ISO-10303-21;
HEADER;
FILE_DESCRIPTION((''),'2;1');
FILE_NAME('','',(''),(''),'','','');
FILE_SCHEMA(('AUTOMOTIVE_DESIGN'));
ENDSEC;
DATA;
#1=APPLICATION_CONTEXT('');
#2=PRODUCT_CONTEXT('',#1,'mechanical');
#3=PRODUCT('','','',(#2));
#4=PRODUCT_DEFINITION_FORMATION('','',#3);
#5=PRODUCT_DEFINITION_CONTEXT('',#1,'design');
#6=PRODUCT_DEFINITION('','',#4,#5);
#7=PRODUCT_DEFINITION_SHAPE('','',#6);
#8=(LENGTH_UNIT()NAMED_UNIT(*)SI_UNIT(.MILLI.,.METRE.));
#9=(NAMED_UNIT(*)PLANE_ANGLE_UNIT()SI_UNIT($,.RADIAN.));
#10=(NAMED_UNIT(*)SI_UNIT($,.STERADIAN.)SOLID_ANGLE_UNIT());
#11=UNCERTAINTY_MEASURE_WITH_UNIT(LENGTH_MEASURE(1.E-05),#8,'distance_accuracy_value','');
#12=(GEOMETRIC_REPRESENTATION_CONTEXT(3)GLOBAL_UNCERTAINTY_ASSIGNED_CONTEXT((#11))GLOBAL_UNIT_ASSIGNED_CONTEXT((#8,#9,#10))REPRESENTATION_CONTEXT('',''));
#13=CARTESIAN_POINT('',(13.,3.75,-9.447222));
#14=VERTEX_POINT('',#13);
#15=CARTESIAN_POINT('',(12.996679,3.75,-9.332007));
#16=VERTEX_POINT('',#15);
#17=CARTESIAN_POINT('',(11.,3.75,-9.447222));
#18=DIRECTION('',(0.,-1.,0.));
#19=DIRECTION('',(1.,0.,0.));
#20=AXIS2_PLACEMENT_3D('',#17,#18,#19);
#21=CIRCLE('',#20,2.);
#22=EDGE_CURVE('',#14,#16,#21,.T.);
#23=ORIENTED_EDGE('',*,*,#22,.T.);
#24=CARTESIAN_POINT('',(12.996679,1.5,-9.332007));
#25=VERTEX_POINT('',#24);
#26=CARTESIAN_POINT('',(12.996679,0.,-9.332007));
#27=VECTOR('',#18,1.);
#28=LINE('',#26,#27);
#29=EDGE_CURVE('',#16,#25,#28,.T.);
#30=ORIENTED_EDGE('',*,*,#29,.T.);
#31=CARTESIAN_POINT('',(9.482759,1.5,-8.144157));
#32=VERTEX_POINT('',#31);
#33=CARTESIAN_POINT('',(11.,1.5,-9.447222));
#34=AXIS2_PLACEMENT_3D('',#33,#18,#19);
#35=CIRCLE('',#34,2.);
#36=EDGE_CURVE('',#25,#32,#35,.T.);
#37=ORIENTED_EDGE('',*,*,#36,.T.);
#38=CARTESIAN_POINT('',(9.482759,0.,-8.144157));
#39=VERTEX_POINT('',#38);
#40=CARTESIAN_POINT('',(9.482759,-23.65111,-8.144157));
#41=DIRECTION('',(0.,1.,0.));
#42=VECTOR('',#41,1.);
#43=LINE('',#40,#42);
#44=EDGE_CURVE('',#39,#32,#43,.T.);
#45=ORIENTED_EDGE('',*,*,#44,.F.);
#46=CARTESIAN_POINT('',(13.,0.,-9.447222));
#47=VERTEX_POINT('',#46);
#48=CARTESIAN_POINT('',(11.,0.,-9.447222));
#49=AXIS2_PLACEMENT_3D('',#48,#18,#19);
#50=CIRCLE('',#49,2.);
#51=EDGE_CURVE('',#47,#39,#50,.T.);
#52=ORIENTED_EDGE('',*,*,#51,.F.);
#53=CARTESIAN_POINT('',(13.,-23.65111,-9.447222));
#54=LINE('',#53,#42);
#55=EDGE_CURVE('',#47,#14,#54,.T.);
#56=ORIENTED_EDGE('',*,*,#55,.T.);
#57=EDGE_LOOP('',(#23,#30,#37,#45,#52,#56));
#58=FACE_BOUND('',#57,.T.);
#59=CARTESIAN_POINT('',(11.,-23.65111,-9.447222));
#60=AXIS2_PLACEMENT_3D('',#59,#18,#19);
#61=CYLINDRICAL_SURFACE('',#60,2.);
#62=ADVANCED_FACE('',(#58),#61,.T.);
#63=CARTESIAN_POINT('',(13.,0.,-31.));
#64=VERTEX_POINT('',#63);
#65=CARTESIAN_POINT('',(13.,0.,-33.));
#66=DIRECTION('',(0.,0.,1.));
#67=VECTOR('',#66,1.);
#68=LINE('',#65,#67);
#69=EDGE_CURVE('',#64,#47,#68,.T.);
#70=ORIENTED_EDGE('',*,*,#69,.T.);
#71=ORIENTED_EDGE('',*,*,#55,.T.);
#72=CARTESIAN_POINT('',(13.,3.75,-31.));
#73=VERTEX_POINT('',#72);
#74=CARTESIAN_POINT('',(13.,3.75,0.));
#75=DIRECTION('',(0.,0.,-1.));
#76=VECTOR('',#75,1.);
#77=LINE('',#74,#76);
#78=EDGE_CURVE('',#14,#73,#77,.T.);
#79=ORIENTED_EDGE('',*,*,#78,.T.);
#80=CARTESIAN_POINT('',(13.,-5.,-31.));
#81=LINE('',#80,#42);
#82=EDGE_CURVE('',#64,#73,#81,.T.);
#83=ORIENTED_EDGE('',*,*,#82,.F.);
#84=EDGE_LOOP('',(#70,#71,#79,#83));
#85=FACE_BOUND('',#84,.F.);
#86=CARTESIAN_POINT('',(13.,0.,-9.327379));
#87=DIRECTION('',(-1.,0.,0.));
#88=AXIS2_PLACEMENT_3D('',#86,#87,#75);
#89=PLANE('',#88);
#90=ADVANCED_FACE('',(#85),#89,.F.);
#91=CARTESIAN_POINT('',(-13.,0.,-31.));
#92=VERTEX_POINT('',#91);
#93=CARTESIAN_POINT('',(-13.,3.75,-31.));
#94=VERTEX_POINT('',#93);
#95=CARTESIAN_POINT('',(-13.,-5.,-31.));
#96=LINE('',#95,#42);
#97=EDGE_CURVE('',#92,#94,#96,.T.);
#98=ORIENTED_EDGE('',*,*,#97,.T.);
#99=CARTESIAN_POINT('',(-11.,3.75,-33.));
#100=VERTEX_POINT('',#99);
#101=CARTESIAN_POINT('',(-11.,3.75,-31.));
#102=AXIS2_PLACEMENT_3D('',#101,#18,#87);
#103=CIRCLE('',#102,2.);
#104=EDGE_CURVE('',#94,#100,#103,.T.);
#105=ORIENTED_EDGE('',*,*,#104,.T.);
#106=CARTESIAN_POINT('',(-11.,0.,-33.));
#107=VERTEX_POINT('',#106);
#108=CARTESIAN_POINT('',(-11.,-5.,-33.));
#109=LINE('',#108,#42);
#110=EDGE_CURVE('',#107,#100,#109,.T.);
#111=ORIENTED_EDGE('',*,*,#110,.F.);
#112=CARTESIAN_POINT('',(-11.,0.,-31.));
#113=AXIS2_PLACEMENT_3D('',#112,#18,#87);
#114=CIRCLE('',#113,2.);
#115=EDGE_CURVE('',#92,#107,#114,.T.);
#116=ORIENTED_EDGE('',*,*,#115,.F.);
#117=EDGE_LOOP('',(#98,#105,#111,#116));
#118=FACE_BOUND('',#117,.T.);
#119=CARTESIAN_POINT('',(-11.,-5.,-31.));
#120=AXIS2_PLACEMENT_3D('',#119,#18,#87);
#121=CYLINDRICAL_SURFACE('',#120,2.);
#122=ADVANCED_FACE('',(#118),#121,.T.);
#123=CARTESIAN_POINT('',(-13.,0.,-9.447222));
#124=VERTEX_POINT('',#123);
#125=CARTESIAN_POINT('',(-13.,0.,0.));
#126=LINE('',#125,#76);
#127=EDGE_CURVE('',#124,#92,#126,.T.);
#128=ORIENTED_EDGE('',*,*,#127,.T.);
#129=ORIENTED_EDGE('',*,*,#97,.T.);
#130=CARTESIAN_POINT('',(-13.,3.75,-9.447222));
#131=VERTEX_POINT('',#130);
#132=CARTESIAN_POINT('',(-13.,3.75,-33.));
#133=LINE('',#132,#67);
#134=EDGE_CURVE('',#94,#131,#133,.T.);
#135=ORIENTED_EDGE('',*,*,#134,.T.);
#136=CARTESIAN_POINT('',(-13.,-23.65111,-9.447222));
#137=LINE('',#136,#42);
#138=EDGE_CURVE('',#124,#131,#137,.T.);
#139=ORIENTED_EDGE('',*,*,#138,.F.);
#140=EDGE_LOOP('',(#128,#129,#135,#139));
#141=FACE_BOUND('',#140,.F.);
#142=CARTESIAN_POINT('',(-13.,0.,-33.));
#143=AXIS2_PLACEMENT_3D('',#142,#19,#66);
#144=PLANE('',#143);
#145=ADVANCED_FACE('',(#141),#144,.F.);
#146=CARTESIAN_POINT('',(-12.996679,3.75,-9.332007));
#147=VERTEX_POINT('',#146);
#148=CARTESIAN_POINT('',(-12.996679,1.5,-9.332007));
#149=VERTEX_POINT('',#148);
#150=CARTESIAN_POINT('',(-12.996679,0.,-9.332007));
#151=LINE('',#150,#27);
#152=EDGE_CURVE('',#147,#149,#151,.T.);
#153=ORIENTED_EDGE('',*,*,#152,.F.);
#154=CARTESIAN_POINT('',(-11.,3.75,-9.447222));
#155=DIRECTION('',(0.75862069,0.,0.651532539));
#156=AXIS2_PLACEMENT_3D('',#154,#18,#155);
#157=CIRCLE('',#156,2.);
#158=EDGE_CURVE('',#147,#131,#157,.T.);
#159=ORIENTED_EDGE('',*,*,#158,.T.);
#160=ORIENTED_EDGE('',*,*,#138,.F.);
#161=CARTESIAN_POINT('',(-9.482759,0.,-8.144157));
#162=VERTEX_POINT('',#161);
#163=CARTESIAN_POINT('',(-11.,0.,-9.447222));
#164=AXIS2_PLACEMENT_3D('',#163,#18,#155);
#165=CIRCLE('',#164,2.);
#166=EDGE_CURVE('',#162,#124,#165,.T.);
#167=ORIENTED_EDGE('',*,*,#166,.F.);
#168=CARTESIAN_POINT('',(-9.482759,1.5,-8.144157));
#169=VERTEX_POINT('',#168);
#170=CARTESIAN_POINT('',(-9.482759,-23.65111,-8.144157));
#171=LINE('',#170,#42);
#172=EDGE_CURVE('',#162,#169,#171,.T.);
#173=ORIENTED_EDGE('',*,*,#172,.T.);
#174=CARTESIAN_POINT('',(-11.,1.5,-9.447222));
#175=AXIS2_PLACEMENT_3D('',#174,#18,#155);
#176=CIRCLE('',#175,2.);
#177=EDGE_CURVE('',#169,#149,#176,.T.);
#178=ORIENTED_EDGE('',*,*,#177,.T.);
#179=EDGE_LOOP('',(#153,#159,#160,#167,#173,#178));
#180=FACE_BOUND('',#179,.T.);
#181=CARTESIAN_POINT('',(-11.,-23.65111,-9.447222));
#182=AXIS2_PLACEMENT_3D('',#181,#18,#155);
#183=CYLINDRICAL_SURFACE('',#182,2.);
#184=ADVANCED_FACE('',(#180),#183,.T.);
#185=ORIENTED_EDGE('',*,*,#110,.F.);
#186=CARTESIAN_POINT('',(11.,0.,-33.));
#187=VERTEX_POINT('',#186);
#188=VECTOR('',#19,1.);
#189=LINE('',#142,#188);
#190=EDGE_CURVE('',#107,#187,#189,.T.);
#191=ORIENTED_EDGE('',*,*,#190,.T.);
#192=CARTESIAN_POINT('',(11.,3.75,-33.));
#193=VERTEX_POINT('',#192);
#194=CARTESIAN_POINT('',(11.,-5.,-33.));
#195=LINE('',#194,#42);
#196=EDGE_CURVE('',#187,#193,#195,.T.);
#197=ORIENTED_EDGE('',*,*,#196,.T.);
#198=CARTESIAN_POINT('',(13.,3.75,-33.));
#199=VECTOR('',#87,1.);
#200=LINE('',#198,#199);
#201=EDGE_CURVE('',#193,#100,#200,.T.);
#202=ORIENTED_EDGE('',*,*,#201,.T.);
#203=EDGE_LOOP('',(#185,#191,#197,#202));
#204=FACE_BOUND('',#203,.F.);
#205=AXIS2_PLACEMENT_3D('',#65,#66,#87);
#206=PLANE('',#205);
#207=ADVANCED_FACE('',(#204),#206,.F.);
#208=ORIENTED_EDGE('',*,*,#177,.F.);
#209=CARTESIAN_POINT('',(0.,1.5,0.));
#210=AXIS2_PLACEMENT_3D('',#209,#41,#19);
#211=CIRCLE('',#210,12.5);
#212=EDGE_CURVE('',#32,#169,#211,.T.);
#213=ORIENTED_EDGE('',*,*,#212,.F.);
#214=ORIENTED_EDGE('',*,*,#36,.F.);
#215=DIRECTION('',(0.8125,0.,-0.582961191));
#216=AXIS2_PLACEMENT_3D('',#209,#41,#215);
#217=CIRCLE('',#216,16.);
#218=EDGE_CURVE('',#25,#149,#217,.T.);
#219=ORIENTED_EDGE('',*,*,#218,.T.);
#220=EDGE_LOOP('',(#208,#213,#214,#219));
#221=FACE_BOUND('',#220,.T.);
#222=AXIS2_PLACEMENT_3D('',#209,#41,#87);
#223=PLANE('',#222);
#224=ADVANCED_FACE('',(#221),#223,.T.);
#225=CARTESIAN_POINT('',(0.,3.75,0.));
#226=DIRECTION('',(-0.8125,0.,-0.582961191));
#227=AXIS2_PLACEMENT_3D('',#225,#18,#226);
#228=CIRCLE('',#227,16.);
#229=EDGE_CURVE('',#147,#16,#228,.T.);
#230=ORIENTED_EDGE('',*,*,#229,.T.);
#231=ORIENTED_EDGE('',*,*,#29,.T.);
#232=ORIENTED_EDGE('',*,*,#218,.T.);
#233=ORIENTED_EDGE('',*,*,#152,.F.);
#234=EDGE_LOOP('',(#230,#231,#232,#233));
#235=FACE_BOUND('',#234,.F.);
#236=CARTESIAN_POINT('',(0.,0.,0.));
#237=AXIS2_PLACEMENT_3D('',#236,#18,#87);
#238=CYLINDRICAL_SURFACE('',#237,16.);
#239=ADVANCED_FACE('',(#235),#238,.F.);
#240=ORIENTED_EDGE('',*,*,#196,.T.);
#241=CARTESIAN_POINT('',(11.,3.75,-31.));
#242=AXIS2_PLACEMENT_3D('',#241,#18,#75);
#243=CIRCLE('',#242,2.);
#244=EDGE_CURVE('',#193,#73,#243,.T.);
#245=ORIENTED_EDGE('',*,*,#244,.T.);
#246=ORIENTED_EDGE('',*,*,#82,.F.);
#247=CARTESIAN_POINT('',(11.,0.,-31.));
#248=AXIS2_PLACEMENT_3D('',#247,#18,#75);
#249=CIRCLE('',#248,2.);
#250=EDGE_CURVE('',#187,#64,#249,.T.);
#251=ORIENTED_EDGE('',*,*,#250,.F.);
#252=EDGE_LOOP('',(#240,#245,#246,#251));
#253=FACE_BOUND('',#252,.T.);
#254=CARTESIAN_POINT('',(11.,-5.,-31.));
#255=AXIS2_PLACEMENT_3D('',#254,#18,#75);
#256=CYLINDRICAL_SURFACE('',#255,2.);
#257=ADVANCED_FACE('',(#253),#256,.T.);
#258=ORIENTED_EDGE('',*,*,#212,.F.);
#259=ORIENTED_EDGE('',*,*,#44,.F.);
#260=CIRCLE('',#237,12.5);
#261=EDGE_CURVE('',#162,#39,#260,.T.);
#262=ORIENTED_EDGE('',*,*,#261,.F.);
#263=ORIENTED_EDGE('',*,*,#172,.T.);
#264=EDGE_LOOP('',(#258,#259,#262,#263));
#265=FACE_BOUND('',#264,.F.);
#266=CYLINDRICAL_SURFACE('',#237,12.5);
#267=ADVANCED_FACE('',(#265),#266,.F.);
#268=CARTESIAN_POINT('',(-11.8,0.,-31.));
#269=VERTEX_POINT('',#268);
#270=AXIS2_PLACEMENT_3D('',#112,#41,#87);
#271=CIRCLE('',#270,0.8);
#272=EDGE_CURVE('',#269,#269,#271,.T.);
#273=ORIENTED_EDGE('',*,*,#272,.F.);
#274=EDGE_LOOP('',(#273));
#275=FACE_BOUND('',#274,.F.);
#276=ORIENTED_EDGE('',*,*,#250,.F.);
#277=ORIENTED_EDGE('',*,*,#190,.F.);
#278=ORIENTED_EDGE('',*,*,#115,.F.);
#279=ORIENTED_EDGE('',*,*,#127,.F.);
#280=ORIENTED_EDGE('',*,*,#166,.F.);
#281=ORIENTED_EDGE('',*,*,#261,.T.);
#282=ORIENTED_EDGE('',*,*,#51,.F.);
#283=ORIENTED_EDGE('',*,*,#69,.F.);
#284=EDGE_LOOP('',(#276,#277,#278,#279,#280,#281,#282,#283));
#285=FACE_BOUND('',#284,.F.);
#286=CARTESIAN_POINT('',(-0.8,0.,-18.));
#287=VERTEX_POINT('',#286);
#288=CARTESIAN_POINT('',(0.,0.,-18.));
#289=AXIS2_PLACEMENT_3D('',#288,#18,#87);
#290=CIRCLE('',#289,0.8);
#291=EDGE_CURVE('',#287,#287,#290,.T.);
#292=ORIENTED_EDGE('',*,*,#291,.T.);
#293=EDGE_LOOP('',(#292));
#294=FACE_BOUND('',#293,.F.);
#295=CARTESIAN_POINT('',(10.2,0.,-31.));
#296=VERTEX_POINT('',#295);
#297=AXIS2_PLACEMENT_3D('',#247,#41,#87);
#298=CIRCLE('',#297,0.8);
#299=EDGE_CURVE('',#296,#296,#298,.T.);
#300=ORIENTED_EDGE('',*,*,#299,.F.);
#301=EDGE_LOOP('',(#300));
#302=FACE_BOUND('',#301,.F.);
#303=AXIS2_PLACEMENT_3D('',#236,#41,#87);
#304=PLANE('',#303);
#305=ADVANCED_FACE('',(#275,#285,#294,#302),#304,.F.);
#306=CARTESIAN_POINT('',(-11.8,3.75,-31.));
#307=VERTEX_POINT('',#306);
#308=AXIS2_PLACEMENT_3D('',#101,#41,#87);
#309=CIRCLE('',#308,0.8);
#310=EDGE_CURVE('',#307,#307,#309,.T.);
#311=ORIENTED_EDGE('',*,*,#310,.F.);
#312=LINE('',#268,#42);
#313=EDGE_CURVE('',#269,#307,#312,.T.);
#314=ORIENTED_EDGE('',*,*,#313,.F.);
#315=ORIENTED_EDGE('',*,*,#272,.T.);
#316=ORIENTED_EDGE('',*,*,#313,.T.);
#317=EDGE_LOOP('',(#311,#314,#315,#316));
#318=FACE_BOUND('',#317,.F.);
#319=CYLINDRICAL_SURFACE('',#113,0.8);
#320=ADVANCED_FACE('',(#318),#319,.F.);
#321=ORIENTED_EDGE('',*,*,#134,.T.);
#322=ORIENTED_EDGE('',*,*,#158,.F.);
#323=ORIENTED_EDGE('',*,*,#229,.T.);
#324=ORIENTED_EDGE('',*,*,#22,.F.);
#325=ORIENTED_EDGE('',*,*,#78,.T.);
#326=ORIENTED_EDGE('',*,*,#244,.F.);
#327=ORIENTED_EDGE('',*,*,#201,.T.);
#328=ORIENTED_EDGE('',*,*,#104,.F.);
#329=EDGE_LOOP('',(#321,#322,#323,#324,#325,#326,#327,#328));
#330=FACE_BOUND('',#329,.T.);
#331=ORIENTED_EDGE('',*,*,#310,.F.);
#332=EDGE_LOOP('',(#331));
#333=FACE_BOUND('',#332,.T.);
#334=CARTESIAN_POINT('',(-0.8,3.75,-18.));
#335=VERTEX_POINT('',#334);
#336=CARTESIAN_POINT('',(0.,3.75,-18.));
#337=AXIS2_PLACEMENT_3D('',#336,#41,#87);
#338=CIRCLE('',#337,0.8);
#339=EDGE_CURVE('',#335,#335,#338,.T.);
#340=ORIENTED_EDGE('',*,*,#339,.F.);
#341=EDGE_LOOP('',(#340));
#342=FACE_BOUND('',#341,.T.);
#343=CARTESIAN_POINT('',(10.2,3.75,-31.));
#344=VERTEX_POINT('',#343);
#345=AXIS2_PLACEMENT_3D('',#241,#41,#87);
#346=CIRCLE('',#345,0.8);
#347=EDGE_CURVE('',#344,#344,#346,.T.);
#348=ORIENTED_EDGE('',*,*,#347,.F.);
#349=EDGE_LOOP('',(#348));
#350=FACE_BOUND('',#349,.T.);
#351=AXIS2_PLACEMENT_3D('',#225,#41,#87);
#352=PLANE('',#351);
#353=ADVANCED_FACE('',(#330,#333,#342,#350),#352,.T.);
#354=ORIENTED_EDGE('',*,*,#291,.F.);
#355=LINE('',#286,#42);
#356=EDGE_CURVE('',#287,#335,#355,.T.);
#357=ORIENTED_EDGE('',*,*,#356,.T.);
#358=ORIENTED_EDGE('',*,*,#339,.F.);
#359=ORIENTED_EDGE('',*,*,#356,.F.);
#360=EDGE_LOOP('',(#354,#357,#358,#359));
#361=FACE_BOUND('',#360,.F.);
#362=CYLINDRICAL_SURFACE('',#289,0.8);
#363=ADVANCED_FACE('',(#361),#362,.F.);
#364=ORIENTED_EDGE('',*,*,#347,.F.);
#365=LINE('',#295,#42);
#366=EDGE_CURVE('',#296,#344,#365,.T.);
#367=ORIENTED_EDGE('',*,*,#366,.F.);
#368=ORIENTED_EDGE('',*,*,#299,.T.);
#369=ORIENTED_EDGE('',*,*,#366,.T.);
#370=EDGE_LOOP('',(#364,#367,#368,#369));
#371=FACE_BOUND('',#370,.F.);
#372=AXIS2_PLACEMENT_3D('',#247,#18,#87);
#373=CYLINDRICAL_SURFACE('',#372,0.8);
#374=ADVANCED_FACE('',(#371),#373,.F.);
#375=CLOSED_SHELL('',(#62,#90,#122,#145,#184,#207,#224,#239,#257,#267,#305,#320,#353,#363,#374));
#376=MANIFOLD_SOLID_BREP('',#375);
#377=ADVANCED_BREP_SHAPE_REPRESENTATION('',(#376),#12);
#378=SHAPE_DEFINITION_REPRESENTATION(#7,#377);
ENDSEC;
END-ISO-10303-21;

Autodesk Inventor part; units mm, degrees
ref_plane "YZ Plane" through (0, 0, 0) normal (1, 0, 0) x (0, 1, 0)
ref_plane "XZ Plane" through (0, 0, 0) normal (0, 1, 0) x (-1, 0, 0)
ref_plane "XY Plane" through (0, 0, 0) normal (0, 0, 1) x (1, 0, 0)
sketch "スケッチ1" plane through (0, 0, 0) normal (0, 1, 0) x (-1, 0, 0)
  circle A0 centre (0, 0) radius 12.5
  line L0 (13, 0) -> (-13, 0)
  line L1 (-13, 0) -> (-13, -33)
  line L2 (-13, -33) -> (13, -33)
  line L3 (13, -33) -> (13, 0)
  circle A1 centre (0, 0) radius 16
  circle A2 centre (11, -31) radius 0.8
  circle A3 centre (-11, -31) radius 0.8
  circle A4 centre (0, -18) radius 0.8
  line L4 (0, -42.8) -> (0, 25.8) projected
  point P0 (13, -9.3274)
  point P1 (-13, -9.3274)
  point P2 (12.5, 0)
  point P3 (-12.5, 0)
  dimension "d0" = 25
  dimension "d1" = 26
  dimension "d2" = 33
  dimension "d3" = 32
  dimension "d9" = 1.6
  dimension "d10" = 1.6
  dimension "d11" = 2
  dimension "d12" = 2
  dimension "d13" = 2
  dimension "d14" = 2
  dimension "d15" = 1.6
  dimension "d16" = 15
extrude "押し出し1" add sketch "スケッチ1" along normal blind 3.75 contours L4 A4 L2 L1 A1 | A1 L3 L2 L4 A4
extrude "押し出し2" add sketch "スケッチ1" along normal blind 1.5 contours L0 L3 A1 L4 A0 | L4 A1 L1 L0 A0 picked at (2.1799, -14.5796) picked at (-2.1799, -14.5796)
fillet "フィレット1" radius 2 6 edges at (-13, 0.75, 0) (-12.5, 0.75, 0) (13, 0.75, 0) (12.5, 0.75, 0) (13, 1.875, -33) (-13, 1.875, -33)
properties part number "waist_cover"
